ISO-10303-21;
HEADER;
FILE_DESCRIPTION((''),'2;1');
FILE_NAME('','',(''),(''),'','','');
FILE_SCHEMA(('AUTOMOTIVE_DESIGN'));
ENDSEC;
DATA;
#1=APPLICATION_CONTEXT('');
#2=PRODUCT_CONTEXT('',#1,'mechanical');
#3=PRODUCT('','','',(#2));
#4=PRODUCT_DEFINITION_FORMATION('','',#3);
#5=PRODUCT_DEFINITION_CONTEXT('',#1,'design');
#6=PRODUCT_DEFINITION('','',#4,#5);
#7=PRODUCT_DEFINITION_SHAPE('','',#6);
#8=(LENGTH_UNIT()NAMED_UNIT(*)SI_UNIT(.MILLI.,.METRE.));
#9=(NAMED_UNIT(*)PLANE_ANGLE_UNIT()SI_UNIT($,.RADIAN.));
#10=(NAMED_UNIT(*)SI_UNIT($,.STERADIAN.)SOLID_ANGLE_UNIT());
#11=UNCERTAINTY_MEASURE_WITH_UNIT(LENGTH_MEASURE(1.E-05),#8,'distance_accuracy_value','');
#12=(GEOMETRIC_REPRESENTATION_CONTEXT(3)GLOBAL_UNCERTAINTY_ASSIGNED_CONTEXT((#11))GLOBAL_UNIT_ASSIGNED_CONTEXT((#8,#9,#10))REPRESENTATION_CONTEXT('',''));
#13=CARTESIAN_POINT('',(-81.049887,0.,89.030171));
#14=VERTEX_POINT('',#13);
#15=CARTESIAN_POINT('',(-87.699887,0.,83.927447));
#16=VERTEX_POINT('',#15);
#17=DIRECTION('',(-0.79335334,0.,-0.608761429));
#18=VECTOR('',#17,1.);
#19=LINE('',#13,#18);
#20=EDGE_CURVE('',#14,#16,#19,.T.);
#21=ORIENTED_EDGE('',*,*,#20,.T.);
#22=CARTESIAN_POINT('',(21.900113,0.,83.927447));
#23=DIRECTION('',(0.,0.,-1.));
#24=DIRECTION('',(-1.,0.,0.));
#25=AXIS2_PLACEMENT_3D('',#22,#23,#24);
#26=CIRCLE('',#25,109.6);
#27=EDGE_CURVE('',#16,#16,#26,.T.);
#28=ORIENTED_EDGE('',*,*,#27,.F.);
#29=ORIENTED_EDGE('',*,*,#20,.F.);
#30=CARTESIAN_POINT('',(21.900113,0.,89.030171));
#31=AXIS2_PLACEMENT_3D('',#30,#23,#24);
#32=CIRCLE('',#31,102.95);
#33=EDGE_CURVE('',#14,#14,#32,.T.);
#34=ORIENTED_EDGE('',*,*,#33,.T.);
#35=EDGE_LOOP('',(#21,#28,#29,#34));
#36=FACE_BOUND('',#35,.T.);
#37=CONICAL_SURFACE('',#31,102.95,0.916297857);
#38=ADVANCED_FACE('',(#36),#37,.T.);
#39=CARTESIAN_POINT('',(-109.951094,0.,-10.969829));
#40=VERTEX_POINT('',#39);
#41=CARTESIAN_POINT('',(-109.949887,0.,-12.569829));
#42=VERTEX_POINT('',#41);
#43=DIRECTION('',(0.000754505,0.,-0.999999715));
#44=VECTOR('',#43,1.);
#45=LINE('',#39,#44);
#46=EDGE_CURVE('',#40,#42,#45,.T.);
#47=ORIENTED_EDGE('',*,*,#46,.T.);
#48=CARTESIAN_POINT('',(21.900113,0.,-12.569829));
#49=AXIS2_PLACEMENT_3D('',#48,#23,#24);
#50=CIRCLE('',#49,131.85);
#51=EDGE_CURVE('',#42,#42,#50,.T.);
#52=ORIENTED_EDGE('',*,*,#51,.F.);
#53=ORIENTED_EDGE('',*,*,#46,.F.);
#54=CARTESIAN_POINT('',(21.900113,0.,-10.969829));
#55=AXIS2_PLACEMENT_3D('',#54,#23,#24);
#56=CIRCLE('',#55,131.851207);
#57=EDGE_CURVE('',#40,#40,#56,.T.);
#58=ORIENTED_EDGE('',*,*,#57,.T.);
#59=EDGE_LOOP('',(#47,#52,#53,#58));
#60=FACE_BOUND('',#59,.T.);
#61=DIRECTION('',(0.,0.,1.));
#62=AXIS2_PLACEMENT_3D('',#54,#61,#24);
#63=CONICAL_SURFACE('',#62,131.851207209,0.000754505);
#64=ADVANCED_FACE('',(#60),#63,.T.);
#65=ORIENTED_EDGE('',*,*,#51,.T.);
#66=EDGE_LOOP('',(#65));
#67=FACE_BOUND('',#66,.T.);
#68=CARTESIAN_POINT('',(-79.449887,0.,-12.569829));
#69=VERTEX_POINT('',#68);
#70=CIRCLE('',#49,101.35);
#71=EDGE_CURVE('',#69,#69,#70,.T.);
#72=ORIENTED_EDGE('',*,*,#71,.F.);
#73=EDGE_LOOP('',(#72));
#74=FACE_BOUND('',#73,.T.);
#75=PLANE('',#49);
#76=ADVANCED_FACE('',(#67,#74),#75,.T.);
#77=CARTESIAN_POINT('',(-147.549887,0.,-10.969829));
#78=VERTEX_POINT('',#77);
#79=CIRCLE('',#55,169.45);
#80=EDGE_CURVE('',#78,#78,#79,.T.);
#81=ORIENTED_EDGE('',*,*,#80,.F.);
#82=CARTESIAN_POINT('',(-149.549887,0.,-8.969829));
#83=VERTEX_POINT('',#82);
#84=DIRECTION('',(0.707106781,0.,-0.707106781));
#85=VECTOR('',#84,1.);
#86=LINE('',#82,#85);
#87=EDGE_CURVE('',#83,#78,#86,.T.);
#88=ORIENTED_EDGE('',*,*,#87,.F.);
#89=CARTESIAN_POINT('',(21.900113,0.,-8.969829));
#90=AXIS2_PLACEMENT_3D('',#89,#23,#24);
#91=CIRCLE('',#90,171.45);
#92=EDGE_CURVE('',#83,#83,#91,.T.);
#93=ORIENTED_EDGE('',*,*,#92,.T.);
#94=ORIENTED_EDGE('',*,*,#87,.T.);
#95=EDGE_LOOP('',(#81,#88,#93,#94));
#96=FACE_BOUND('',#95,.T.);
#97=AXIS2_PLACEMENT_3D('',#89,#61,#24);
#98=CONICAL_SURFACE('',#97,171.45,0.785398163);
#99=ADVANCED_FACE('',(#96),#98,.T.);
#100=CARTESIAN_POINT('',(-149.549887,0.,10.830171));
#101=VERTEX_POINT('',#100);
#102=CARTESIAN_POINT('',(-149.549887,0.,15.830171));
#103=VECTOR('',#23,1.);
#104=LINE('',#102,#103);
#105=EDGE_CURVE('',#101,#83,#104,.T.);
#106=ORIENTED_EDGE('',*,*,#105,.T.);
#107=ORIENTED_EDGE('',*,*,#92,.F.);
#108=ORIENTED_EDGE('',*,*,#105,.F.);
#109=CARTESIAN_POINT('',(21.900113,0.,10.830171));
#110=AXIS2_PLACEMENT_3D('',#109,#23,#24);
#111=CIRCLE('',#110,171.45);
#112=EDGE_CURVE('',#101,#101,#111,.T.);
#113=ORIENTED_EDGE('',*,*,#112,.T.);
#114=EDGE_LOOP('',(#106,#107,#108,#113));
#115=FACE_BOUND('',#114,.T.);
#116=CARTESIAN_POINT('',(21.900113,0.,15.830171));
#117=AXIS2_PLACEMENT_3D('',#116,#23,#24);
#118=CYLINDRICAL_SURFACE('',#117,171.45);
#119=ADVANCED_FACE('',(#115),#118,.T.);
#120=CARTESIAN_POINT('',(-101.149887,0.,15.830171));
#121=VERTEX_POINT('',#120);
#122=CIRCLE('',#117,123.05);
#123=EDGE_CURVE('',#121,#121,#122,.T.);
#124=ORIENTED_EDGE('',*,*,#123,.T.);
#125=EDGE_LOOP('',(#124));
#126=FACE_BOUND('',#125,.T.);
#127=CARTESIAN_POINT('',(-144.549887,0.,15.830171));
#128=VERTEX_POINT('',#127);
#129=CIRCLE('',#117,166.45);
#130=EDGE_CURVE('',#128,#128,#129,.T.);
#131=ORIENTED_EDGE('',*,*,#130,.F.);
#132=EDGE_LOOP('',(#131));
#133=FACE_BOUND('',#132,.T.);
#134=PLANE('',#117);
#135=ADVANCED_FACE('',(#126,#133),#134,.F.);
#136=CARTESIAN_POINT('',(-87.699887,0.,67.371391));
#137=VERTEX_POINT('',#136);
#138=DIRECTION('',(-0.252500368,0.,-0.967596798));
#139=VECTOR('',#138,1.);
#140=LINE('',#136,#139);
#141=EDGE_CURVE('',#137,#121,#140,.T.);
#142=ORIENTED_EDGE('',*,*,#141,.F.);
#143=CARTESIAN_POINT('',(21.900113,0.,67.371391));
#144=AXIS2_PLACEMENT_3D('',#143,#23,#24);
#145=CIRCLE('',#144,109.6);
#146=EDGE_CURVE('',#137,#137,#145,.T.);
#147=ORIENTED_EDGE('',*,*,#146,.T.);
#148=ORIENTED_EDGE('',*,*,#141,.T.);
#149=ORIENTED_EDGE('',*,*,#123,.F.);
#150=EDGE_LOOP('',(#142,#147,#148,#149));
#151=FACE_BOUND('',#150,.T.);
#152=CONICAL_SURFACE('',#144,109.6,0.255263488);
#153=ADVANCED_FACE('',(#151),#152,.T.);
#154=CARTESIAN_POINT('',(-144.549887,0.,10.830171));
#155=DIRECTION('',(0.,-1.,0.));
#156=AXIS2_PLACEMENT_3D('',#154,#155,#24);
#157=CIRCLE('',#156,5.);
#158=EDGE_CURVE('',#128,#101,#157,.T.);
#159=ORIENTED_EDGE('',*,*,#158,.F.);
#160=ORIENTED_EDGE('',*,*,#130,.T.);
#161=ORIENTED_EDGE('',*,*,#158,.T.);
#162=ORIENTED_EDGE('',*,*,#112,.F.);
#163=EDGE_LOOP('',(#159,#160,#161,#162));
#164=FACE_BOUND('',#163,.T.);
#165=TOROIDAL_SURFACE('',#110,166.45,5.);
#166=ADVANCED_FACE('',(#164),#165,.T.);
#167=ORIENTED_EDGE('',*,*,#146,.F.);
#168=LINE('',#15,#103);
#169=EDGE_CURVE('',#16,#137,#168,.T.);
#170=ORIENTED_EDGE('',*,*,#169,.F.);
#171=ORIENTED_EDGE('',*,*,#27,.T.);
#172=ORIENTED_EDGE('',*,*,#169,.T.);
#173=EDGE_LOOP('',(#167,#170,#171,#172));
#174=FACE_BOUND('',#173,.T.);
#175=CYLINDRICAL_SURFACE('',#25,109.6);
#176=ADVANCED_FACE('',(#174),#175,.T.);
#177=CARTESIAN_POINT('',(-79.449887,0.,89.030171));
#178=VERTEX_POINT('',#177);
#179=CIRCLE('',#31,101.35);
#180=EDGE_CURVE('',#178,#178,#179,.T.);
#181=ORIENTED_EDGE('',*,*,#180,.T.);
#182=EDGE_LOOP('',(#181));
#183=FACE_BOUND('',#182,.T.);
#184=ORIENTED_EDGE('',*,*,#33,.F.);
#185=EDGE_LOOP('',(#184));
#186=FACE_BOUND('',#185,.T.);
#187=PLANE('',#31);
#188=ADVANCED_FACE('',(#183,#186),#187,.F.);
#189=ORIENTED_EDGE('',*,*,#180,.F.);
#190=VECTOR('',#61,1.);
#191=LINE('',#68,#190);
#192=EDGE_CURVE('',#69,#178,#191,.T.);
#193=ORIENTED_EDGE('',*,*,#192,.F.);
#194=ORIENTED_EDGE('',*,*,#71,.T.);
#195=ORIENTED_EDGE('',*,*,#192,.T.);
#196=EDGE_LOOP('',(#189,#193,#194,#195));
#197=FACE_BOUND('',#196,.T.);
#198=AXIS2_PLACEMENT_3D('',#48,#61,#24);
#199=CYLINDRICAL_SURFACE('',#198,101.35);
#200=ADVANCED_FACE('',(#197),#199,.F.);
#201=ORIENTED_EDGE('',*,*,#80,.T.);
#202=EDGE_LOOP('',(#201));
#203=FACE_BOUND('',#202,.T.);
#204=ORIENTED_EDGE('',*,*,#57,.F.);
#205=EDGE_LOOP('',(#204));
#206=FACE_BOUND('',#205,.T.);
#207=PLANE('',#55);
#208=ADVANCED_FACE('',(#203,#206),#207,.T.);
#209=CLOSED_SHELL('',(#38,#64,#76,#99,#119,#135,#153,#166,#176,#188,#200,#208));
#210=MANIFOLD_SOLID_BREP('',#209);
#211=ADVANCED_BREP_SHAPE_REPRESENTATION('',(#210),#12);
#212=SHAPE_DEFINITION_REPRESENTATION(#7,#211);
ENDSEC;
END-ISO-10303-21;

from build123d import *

# Parameters (mm, degrees)
F2_R    = 5
F3_SIZE = 2


with BuildPart() as f1:
    # F0 (on Front) → F1 (revolve)
    with BuildSketch(Plane.XZ):
        Polygon((-79.4498865843, -12.5698290182), (-79.4498865843, 89.0301709818), (-81.0498865843, 89.0301709818), (-87.6998865843, 83.9274465117), (-87.6998865843, 67.3713907599), (-101.1498865843, 15.8301709818), (-149.5498865843, 15.8301709818), (-149.5498865843, -10.9698290182), (-109.9510937929, -10.9698290182), (-109.9498865843, -12.5698290182), align=None)
    revolve(axis=Axis((21.9001134157, 0, 0.9622275829), (0, 0, -1)))

    # F2
    f2_edges = [f1.edges().sort_by_distance(p)[0] for p in [
        (193.350113, 0, 15.830171),
    ]]
    fillet(f2_edges, radius=F2_R)

    # F3
    f3_edges = [f1.edges().sort_by_distance(p)[0] for p in [
        (193.350113, 0, -10.969829),
    ]]
    chamfer(f3_edges, length=F3_SIZE)


solid = f1.part
